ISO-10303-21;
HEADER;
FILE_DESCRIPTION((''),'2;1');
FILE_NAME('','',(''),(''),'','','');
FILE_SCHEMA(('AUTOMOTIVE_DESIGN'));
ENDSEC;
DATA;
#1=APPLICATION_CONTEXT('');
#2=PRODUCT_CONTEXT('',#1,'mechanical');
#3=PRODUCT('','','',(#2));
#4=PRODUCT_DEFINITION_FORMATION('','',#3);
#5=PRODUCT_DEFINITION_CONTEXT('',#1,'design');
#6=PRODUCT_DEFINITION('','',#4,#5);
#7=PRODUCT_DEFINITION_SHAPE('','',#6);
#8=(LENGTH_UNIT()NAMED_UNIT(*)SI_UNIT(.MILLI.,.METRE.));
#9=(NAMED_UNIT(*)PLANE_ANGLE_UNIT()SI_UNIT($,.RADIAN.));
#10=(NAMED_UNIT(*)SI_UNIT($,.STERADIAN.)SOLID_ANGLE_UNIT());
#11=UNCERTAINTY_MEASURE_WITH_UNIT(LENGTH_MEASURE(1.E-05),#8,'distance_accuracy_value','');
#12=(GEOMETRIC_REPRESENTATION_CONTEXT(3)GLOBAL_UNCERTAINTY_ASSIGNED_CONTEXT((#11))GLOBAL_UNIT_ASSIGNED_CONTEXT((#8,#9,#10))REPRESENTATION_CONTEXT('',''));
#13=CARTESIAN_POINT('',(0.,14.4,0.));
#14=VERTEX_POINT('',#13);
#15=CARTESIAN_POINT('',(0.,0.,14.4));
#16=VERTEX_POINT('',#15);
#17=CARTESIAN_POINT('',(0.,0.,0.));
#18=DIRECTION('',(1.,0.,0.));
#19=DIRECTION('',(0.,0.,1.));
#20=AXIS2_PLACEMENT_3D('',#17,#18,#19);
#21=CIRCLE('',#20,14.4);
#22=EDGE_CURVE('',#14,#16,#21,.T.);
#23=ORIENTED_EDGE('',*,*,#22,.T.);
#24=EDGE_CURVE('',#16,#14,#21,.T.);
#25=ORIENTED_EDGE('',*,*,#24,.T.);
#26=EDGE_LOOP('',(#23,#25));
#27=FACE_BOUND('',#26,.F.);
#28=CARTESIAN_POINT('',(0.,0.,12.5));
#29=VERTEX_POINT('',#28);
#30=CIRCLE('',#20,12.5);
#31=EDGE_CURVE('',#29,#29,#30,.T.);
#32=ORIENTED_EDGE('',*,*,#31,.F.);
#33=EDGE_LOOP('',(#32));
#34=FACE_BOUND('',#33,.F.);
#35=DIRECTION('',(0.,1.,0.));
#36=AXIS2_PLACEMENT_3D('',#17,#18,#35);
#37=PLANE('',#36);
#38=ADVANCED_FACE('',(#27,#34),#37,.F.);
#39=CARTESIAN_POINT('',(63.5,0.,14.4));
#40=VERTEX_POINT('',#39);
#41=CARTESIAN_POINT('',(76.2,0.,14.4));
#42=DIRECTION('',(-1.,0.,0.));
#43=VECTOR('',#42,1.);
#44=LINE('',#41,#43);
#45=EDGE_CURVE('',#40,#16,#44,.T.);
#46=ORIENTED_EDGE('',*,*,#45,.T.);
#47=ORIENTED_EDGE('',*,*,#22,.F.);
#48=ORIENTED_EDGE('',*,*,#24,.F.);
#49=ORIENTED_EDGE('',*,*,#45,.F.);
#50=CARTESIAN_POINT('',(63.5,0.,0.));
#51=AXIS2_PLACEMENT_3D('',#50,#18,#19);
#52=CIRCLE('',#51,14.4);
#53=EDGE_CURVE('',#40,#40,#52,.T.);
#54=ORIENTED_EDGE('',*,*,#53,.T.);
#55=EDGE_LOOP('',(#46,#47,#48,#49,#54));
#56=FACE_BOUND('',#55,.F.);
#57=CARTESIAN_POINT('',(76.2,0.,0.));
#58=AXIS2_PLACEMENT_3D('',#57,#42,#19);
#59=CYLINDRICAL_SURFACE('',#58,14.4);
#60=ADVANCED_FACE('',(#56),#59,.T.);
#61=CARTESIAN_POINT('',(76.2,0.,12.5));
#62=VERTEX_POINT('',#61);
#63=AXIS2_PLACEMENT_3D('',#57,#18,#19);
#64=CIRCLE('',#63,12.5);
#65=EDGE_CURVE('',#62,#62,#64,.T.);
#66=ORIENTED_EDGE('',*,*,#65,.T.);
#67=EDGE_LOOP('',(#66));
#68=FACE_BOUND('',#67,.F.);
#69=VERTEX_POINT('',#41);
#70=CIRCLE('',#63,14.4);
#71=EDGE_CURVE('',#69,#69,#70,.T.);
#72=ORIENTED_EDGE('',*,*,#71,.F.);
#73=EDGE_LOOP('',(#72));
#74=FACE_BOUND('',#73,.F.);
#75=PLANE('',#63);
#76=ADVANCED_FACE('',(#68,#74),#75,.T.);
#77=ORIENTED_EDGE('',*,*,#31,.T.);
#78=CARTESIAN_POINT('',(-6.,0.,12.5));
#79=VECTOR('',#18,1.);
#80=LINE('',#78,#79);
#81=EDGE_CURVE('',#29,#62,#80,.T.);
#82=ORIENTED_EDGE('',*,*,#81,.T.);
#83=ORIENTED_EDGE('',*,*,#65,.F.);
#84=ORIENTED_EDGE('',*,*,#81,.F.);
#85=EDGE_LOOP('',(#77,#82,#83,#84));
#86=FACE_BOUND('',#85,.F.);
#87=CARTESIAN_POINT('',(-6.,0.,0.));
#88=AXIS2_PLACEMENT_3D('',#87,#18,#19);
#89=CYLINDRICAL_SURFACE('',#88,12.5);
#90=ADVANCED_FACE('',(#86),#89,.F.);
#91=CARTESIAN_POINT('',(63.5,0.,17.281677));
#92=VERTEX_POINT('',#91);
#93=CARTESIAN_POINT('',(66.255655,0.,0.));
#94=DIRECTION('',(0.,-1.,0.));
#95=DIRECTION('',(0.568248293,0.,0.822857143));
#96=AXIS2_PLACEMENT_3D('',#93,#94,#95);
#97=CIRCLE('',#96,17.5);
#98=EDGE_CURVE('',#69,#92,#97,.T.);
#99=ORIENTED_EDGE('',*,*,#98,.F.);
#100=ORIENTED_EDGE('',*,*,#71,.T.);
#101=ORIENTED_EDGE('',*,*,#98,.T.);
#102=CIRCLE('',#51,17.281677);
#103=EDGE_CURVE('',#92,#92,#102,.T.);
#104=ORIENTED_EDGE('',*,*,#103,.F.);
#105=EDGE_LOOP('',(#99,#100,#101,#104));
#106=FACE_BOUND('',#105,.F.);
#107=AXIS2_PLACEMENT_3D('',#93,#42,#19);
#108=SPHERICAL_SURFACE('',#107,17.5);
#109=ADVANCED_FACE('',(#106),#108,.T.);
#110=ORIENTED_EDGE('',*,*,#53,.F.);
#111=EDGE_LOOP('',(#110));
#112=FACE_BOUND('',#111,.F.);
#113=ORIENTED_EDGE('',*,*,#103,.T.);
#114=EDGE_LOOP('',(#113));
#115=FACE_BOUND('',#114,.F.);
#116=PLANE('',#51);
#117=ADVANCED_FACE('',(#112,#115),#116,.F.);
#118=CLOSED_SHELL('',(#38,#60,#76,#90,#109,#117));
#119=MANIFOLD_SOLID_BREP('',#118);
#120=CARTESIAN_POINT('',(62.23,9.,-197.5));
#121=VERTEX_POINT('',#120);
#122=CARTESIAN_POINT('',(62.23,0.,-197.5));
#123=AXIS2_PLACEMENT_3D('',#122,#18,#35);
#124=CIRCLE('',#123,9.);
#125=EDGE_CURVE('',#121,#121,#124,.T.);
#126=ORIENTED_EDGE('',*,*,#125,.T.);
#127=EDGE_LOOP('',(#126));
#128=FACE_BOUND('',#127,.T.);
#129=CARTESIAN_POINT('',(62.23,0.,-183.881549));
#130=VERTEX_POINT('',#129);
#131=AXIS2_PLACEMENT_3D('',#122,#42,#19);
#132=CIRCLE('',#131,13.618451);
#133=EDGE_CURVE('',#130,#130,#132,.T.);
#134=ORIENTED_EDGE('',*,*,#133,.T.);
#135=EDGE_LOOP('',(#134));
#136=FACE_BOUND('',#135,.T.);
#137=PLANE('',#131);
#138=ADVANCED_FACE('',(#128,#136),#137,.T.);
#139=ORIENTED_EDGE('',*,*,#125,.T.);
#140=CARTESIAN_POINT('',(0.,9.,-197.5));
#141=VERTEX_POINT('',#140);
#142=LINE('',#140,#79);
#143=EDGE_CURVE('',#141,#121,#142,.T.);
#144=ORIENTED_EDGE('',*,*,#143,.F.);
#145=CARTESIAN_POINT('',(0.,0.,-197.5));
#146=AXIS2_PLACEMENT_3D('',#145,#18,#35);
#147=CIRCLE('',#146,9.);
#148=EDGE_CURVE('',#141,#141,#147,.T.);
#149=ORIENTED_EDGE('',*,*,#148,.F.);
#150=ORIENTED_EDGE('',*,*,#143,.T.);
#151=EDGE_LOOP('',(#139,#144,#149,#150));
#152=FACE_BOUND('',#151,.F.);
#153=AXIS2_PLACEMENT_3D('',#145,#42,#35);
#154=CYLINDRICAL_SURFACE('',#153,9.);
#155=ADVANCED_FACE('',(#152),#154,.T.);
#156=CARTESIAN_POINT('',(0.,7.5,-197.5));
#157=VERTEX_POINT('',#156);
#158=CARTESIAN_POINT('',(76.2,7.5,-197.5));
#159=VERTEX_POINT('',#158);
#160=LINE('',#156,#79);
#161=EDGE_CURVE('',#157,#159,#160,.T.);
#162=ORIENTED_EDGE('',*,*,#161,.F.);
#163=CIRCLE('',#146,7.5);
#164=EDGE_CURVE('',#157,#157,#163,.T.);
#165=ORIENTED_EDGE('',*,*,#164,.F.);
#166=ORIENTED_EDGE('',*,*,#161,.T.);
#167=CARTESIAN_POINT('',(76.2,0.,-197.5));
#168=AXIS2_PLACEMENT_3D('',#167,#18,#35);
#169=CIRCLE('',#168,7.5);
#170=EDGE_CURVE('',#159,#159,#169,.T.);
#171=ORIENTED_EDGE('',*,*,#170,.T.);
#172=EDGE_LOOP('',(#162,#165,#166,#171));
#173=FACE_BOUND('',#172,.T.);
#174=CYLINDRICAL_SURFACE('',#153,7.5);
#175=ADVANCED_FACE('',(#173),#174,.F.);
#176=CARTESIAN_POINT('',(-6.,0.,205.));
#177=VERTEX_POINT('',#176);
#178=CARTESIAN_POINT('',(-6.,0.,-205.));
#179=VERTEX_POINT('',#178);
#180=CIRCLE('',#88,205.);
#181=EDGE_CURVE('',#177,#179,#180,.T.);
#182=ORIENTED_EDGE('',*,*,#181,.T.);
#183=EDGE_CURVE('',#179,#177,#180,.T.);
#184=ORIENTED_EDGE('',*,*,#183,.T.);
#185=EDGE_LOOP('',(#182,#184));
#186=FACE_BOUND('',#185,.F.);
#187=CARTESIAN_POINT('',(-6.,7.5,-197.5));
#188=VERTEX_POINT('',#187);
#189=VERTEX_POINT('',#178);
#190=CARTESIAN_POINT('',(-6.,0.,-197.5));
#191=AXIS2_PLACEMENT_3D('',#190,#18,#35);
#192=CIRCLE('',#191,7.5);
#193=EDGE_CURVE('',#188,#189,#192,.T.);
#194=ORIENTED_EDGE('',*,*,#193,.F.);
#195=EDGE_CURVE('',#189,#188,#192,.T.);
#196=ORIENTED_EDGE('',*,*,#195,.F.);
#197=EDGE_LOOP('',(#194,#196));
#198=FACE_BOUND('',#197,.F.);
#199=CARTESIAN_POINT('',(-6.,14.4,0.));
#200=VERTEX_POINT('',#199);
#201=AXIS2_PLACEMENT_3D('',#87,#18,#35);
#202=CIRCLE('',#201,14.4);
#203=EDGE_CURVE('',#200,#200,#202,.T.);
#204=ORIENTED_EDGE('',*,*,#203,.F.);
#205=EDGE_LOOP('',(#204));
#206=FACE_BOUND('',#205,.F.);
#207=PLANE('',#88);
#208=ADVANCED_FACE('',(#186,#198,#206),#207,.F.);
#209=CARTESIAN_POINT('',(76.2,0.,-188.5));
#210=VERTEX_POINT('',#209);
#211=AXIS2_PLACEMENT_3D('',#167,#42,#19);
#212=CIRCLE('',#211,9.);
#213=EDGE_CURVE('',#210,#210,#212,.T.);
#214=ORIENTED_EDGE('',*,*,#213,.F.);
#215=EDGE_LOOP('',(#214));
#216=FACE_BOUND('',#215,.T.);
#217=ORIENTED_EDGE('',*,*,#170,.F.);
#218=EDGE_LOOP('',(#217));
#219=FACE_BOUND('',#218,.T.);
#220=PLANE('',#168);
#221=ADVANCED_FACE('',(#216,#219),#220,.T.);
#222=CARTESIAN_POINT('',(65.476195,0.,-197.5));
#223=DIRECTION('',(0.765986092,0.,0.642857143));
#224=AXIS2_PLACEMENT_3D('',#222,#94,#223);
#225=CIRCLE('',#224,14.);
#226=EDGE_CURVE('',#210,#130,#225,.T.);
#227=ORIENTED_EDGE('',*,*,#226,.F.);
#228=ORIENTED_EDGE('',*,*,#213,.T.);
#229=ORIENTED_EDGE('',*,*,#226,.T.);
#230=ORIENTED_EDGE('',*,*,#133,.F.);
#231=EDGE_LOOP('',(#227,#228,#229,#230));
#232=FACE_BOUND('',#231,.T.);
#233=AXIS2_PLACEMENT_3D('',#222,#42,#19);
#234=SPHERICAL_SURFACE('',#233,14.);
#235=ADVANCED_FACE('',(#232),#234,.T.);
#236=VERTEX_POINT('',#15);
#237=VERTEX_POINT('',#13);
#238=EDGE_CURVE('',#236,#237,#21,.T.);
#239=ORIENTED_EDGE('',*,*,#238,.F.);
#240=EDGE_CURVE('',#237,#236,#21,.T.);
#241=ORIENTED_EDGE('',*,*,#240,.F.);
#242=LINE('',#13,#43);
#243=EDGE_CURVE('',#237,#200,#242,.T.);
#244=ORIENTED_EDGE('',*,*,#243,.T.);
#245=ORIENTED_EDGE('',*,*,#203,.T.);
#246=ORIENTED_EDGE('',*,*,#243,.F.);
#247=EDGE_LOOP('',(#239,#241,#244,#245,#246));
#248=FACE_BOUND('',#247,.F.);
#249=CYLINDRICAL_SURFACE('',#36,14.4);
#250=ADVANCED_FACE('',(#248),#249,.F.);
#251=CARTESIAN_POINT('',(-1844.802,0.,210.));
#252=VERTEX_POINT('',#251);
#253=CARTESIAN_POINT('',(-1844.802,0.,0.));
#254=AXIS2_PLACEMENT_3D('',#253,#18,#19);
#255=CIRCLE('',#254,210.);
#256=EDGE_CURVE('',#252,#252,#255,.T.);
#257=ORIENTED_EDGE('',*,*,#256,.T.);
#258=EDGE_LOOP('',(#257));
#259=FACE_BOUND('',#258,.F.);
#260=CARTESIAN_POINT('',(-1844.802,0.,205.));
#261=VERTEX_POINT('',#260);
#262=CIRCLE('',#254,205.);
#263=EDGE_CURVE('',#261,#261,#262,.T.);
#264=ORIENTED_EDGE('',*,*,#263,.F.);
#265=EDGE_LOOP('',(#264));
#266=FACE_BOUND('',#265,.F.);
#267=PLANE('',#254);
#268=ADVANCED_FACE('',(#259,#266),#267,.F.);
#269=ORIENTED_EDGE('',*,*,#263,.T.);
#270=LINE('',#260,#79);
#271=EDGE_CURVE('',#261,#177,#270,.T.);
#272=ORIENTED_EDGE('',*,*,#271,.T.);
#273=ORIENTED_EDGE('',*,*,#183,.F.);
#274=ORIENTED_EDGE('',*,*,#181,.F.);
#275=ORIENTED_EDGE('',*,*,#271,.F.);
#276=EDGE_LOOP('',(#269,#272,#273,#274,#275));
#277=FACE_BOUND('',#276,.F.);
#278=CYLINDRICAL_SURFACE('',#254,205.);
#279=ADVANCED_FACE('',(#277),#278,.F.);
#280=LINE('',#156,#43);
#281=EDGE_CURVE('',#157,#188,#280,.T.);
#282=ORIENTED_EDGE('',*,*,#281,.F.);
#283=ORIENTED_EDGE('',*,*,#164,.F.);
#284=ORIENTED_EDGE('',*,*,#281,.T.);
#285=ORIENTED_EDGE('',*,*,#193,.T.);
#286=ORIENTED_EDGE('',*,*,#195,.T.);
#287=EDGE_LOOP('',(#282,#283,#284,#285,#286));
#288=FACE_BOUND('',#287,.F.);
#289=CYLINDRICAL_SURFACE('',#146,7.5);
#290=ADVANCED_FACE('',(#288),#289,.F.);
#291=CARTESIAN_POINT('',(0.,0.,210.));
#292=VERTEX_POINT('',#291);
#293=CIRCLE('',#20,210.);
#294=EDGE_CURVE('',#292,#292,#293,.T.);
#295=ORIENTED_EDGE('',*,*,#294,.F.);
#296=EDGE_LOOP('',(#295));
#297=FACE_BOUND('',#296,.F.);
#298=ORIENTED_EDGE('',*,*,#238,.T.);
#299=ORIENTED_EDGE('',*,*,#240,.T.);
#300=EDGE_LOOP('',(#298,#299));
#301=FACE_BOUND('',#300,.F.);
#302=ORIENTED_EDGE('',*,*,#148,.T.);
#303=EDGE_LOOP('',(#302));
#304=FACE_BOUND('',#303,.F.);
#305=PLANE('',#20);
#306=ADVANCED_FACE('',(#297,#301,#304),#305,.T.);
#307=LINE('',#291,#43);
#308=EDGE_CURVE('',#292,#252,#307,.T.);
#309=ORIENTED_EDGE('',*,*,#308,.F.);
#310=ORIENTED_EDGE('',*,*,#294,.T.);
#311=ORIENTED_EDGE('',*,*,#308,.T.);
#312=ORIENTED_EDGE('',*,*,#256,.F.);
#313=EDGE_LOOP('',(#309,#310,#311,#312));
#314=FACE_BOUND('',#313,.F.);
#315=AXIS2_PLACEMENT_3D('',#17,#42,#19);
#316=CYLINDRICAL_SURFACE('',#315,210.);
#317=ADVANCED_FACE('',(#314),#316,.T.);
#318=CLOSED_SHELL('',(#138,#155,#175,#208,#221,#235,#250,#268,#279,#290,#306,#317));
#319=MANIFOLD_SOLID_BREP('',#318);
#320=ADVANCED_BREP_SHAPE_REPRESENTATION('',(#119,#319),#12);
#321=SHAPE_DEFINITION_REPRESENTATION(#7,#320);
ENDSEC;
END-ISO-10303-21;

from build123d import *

# Parameters (mm, degrees)
F0_W     = 6
F0_H     = 190.6
F2_R     = 14.4
F3_DEPTH = 25.4
F4_R     = 9
F4_R_2   = 7.5
F5_DEPTH = 76.2


with BuildPart() as f1:
    # F0 (on Front) → F1 (revolve)
    with BuildSketch(Plane.XZ):
        Polygon((0, 210), (-1844.802, 210), (-1844.802, 205), (-6, 205), (0, 205), align=None)
        with Locations((-3, 109.7)):
            Rectangle(F0_W, F0_H)
        Polygon((63.5, 14.4), (0, 14.4), (-6, 14.4), (-6, 12.5), (76.2, 12.5), (76.2, 14.4), align=None)
        with BuildLine():
            Line((63.5, 17.2816771819), (63.5, 14.4))
            Line((63.5, 14.4), (76.2, 14.4))
            ThreePointArc((76.2, 14.4), (70.1280356313, 17.0661849066), (63.5, 17.2816771819))
        make_face()
    revolve(axis=Axis((-922.401, 0, 0), (1, 0, 0)))

    # F2 (on face) → F3 (cut)
    with BuildSketch(Plane.YZ):
        with BuildLine():
            ThreePointArc((-6.16e-08, -205), (5.3033008371, -202.8033008807), (7.5, -197.5))
            ThreePointArc((7.5, -197.5), (-5.3033008371, -192.1966991193), (-6.16e-08, -205))
        make_face()
        Circle(F2_R)
    extrude(amount=-F3_DEPTH, mode=Mode.SUBTRACT)

    # F4 (on face) → F5 (join)
    with BuildSketch(Plane.YZ):
        with Locations((0, -197.5)):
            Circle(F4_R)
        with Locations((0, -197.5)):
            Circle(F4_R_2, mode=Mode.SUBTRACT)
    extrude(amount=F5_DEPTH)

    # F6 (on Front) → F7 (revolve)
    with BuildSketch(Plane.XZ):
        with BuildLine():
            Line((62.23, -183.8815485485), (62.23, -188.5))
            Line((62.23, -188.5), (76.2, -188.5))
            ThreePointArc((76.2, -188.5), (69.8706444415, -184.2075656287), (62.23, -183.8815485485))
        make_face()
    revolve(axis=Axis((38.1, 0, -197.5), (-1, 0, 0)))


solid = f1.part
